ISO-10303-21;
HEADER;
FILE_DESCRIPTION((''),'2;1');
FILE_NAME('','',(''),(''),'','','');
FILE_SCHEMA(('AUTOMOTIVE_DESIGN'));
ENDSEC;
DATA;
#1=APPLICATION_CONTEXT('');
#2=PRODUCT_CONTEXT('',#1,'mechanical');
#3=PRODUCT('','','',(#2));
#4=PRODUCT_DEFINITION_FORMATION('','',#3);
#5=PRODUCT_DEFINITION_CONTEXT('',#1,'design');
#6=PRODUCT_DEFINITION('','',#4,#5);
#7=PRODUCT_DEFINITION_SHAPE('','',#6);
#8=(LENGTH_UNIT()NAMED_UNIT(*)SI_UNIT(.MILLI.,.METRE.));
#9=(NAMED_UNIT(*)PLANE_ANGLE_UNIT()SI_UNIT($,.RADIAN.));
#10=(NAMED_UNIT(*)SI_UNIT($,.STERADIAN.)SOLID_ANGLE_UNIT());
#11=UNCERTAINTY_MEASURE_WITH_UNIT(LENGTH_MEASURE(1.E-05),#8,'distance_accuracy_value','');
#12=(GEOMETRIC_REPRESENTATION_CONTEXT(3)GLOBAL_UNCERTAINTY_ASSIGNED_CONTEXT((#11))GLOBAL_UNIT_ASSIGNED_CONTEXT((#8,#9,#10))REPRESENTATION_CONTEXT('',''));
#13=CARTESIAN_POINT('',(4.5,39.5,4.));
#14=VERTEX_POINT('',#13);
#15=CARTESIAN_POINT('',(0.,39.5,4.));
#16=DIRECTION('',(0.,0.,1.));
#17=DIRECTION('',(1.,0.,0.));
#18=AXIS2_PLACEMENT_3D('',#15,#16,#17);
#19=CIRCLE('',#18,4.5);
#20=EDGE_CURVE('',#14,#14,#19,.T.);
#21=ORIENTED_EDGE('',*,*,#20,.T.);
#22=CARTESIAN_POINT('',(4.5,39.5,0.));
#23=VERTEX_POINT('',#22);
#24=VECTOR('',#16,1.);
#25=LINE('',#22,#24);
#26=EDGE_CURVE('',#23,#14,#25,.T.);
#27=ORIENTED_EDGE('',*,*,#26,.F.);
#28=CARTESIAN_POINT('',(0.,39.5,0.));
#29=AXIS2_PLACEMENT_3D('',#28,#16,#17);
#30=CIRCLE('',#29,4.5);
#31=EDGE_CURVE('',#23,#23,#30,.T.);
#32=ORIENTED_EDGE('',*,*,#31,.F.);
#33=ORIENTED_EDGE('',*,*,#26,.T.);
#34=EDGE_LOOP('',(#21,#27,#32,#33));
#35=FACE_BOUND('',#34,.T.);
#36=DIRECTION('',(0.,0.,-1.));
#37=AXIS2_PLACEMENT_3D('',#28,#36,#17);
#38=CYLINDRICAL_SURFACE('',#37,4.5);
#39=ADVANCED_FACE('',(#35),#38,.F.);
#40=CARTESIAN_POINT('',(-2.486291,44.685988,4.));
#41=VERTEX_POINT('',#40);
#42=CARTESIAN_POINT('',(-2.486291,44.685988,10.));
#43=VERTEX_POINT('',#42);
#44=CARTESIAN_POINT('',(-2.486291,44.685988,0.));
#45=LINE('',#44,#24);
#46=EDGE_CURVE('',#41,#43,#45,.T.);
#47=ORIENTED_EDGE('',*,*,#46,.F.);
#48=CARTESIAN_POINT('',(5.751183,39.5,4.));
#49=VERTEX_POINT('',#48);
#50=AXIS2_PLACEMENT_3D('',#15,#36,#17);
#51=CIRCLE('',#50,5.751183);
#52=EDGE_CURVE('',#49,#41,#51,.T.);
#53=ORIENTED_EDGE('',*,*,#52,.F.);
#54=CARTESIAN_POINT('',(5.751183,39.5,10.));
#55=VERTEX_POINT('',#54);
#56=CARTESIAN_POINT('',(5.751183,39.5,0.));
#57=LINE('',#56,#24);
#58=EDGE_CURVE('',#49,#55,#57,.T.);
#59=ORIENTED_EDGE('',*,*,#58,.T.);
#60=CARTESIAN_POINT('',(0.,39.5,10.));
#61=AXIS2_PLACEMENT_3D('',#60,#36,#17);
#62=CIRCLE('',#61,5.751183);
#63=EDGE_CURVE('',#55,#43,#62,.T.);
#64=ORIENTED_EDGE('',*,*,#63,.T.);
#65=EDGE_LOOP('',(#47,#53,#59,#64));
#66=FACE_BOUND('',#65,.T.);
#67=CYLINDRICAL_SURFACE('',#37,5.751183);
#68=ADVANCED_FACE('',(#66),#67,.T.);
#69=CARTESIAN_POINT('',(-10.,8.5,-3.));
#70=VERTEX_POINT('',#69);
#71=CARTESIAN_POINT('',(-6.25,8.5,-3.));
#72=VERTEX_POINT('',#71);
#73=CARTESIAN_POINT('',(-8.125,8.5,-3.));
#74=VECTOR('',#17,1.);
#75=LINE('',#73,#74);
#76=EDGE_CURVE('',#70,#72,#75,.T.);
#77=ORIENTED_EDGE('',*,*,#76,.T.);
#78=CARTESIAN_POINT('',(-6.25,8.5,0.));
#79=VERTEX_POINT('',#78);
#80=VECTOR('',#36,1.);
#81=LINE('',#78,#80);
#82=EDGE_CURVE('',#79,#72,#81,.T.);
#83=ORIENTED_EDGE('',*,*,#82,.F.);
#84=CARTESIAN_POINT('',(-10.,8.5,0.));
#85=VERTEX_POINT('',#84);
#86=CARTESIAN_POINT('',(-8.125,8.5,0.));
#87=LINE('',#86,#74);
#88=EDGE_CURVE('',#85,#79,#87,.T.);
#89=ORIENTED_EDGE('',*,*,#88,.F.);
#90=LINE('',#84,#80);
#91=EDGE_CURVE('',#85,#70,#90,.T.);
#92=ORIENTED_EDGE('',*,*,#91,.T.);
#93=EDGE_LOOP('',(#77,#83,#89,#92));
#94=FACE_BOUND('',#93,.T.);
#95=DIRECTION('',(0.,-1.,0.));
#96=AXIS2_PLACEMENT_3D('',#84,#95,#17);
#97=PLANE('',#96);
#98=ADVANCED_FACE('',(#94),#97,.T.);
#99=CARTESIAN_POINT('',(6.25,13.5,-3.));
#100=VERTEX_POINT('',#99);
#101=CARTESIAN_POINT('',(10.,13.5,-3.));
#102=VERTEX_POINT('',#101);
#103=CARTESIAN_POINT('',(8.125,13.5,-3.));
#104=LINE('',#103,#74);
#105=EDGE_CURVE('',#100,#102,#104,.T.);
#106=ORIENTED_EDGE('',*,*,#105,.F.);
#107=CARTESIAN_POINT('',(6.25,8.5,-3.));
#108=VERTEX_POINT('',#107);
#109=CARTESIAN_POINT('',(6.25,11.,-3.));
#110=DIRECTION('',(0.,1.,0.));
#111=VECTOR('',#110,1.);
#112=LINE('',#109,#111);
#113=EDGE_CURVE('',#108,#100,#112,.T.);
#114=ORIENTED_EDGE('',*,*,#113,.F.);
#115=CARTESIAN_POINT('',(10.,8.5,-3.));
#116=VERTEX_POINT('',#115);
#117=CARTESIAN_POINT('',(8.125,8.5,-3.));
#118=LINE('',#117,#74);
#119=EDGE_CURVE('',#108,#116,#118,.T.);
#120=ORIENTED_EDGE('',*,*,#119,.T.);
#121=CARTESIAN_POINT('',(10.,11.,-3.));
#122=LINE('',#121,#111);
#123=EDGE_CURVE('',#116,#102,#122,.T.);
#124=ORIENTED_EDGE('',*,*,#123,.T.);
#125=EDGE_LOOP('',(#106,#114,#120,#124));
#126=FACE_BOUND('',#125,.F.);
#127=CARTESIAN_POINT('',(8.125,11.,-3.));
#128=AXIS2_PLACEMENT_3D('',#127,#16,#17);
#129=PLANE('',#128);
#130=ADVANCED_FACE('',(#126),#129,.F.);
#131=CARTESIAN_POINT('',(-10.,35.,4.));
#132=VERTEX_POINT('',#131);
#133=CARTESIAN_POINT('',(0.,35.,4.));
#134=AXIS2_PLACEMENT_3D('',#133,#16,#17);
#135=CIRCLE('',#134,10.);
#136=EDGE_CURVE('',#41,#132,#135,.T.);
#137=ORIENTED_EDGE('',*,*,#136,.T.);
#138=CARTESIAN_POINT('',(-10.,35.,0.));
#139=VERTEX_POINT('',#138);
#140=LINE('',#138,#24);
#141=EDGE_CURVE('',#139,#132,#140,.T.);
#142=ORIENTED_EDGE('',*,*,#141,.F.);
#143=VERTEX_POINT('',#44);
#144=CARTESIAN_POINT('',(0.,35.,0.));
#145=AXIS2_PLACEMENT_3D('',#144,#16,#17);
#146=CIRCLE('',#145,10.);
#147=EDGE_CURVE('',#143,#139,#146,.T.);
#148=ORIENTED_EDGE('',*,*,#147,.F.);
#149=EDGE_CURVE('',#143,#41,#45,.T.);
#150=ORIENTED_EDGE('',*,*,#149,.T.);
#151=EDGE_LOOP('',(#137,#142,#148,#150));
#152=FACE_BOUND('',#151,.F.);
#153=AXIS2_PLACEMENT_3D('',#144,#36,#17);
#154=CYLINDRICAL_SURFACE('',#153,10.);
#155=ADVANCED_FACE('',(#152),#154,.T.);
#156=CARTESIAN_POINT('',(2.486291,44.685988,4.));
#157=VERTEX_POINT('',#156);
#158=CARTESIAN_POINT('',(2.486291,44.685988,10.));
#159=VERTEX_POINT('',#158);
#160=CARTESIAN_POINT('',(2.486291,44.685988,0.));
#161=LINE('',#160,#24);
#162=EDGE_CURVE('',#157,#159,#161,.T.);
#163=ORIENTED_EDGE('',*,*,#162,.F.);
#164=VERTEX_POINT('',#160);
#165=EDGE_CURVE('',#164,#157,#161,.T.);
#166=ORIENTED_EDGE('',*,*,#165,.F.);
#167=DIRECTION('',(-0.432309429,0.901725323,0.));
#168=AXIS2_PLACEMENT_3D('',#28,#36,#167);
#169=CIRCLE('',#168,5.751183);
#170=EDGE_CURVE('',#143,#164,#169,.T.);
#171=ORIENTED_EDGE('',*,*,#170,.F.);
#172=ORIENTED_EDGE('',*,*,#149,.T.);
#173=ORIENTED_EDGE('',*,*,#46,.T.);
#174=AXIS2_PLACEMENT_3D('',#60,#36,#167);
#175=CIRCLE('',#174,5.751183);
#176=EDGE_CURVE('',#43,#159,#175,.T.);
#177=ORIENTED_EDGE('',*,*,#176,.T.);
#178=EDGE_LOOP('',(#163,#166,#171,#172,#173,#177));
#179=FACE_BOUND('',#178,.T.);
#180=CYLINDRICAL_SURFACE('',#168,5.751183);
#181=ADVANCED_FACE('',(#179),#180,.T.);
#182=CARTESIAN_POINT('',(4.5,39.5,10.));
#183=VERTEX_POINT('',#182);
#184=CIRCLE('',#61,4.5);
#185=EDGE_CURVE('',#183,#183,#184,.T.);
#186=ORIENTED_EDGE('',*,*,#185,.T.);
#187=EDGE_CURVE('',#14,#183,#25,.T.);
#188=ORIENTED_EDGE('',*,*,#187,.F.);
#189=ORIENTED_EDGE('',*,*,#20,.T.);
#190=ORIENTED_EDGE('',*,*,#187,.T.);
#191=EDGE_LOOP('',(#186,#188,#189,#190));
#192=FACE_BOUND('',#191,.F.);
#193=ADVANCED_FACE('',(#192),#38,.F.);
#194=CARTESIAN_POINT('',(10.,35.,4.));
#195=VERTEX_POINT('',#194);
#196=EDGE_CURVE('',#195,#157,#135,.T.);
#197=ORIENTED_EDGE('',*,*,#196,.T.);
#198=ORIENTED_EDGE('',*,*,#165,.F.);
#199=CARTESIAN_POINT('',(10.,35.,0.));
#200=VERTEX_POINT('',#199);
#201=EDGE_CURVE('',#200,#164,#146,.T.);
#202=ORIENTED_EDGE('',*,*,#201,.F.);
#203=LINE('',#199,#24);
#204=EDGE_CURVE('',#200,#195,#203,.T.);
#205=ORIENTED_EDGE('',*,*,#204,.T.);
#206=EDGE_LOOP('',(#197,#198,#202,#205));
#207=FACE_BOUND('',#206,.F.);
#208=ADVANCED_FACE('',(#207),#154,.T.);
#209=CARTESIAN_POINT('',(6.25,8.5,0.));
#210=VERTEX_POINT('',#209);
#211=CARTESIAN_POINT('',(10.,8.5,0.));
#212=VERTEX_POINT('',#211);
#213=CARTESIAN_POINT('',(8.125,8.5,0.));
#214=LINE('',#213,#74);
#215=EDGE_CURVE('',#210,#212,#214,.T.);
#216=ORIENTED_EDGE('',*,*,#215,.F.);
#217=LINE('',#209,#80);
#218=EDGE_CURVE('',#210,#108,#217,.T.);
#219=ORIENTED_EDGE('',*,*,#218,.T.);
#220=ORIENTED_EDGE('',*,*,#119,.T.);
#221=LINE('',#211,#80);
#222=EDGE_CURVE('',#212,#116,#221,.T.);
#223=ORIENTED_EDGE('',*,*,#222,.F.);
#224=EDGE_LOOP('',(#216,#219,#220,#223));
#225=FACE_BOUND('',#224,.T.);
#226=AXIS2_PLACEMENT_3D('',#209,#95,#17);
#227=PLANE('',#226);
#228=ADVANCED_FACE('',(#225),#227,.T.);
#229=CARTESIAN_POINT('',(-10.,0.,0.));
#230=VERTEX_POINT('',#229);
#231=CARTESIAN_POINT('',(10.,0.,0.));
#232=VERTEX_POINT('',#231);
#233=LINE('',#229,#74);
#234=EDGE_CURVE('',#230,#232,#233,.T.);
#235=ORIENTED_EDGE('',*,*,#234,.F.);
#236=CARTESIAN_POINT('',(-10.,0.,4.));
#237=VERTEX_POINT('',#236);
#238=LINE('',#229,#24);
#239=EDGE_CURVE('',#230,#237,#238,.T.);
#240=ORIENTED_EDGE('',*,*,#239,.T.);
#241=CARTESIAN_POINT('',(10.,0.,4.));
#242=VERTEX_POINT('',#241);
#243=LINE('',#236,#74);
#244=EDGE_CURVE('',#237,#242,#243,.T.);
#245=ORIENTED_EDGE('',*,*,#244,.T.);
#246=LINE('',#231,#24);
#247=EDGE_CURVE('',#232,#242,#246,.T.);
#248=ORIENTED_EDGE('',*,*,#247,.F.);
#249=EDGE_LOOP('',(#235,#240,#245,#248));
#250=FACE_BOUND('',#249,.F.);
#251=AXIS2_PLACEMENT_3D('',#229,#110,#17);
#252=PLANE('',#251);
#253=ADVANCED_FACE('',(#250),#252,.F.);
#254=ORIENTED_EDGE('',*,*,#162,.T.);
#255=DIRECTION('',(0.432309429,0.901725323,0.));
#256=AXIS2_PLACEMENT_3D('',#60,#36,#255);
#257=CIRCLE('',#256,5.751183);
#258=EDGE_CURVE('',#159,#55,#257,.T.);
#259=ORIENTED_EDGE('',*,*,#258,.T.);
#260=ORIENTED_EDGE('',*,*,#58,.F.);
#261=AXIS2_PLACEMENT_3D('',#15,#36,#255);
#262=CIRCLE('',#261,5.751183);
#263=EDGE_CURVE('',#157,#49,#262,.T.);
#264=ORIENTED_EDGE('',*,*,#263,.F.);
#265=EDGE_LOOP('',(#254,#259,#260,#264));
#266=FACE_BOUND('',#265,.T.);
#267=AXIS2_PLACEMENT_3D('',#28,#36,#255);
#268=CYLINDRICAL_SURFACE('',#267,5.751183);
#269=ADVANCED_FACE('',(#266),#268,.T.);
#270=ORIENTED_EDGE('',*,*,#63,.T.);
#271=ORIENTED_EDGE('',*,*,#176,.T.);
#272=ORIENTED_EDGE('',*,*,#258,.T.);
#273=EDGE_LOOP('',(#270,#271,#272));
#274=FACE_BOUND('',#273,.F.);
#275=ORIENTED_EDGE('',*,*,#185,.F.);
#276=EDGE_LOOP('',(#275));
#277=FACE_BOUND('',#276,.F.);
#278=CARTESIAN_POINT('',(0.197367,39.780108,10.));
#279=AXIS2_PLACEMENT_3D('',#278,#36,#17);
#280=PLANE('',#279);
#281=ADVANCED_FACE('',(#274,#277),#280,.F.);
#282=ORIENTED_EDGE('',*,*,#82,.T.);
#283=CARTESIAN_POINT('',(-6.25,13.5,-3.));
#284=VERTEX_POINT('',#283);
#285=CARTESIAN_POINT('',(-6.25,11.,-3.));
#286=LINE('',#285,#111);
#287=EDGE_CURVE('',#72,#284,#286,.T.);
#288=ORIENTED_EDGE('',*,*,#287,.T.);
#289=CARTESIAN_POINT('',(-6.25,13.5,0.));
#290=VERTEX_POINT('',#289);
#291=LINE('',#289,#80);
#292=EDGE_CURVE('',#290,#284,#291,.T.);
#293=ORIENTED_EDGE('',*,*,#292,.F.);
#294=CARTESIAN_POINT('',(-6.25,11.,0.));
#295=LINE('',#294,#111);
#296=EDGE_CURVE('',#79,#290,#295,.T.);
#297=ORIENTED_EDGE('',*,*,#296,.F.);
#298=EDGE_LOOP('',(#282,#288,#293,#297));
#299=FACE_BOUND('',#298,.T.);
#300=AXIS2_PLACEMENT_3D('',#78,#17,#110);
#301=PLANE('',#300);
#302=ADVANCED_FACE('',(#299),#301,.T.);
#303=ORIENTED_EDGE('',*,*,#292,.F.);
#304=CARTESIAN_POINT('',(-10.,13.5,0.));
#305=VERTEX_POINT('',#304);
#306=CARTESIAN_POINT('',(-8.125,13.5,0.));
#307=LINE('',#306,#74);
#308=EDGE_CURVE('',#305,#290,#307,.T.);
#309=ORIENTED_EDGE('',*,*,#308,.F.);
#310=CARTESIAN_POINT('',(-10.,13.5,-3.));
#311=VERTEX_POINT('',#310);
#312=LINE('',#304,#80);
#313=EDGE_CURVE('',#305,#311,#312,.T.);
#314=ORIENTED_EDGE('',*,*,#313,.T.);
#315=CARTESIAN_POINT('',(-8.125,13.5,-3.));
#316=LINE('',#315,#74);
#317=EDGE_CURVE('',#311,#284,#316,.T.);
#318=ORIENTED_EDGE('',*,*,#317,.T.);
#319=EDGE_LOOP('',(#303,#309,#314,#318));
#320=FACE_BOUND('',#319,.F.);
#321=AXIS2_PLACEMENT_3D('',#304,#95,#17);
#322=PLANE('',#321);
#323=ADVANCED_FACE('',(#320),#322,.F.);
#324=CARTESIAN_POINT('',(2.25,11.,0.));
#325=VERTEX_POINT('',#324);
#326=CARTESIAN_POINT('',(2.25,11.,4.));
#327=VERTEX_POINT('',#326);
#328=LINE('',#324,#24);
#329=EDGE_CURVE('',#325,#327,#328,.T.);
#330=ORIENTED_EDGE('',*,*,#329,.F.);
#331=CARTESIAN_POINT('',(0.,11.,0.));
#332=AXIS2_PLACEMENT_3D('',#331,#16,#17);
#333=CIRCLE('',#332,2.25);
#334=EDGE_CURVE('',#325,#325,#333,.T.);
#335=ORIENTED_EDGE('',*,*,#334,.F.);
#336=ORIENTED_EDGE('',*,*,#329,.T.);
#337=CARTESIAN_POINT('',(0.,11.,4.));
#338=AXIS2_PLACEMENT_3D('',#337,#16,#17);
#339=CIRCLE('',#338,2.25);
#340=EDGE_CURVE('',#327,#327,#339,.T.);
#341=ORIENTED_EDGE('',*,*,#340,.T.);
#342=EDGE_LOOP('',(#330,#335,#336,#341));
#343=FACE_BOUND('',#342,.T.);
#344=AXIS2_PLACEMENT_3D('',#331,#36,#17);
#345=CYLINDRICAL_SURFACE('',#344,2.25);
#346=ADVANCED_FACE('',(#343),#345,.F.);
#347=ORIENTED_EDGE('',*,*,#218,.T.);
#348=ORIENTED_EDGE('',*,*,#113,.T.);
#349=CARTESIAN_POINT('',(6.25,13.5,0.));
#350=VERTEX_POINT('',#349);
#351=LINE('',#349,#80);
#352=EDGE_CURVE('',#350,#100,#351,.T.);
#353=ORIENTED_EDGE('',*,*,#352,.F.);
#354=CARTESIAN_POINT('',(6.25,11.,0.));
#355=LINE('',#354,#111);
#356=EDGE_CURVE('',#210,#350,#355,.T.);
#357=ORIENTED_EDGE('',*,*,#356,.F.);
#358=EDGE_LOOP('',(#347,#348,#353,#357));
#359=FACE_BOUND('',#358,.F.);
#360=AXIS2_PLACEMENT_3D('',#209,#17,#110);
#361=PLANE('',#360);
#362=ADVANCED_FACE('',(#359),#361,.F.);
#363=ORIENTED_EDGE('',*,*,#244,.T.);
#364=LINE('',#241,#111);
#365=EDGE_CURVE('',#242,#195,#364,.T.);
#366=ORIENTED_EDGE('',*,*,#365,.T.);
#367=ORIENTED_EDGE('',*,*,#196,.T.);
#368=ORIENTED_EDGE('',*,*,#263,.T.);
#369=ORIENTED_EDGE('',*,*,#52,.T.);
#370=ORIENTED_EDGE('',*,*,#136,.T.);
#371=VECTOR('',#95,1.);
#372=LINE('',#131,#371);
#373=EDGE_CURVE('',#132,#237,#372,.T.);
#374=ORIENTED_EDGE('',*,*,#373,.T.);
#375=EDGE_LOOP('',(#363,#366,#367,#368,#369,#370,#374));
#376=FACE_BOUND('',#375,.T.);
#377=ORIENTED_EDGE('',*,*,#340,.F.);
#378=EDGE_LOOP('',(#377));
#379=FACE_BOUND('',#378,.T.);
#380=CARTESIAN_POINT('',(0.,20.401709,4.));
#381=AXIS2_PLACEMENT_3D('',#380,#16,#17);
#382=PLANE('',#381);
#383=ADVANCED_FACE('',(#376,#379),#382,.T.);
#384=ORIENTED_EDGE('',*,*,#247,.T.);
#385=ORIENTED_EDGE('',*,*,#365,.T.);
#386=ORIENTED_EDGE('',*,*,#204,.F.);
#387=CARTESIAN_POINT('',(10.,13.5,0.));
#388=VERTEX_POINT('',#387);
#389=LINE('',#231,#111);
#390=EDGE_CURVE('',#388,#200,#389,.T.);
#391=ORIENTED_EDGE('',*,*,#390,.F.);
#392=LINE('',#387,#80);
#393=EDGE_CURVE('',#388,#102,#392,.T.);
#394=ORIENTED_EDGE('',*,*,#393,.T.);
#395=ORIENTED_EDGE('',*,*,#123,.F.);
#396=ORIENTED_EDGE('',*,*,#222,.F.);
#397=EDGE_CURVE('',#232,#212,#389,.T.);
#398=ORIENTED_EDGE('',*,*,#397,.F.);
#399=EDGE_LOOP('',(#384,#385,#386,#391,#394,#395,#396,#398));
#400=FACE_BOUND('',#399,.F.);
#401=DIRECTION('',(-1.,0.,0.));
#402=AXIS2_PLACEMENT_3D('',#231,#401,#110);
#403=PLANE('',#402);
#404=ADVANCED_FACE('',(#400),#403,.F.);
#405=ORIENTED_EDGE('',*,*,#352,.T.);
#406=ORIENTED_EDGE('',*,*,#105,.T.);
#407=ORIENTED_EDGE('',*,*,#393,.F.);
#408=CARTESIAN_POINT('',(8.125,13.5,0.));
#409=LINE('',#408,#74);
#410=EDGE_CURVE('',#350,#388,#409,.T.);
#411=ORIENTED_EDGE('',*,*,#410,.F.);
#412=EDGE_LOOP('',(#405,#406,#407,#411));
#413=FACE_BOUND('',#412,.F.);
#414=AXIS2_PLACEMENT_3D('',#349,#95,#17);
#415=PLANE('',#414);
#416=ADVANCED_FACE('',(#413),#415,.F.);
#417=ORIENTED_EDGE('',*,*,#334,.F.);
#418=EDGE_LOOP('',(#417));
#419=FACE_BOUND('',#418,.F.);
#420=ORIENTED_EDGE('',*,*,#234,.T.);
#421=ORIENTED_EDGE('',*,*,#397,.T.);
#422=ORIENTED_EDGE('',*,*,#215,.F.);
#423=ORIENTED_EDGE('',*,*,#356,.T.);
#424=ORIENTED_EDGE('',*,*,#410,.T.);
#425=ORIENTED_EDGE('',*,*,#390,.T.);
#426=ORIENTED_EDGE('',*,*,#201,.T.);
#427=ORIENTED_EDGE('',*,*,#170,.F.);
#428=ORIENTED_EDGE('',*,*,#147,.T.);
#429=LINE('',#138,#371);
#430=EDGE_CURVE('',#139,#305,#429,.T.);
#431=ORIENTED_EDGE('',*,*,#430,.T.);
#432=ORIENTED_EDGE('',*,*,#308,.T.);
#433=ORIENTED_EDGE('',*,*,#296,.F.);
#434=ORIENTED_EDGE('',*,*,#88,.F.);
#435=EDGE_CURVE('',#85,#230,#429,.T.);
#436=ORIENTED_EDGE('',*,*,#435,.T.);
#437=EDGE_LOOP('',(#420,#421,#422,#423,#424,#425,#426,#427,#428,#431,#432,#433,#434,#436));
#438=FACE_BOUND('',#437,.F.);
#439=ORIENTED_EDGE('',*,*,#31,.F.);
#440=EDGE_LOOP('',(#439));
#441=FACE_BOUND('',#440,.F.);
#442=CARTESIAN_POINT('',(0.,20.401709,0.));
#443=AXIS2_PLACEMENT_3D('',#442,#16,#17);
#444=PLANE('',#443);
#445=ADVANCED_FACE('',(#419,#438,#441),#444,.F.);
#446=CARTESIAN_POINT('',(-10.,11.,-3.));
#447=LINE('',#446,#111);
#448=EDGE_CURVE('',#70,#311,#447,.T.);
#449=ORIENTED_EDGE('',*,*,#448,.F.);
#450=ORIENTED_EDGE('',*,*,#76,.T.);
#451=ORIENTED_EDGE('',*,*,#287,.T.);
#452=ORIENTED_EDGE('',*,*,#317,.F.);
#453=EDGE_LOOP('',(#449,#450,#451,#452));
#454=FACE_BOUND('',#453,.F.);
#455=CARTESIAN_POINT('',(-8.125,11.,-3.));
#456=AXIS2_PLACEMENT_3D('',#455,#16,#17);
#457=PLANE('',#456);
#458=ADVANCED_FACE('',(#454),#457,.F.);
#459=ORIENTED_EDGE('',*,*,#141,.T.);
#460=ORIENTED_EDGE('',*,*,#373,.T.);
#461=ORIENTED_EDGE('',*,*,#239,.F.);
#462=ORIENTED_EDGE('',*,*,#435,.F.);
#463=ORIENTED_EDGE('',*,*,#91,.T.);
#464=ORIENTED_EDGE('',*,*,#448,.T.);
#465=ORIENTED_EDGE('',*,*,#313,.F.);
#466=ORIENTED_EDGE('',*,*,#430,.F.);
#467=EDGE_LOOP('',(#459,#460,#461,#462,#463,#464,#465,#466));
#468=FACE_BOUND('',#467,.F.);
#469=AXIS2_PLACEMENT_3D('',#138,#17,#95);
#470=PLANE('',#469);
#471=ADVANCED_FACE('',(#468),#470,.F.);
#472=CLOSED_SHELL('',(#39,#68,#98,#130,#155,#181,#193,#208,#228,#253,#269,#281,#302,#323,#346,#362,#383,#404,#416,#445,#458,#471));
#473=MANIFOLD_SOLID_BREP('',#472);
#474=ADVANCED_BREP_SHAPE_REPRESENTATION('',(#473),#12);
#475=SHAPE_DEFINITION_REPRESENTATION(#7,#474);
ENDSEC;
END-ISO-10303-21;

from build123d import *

# Parameters (mm, degrees)
F0_R     = 2.25
F0_R_2   = 4.5
F1_DEPTH = 4
F2_W     = 3.75
F2_H     = 5
F3_DEPTH = 3
F4_R     = 4.5
F5_DEPTH = 10


with BuildPart() as f1:
    # F0 (on Top) → F1 (new body)
    with BuildSketch(Plane.XY):
        with BuildLine():
            Line((-10, 35), (-10, 0))
            Line((-10, 0), (10, 0))
            Line((10, 0), (10, 35))
            ThreePointArc((10, 35), (0, 45), (-10, 35))
        make_face()
        with Locations((0, 11)):
            Circle(F0_R, mode=Mode.SUBTRACT)
        with Locations((0, 39.5)):
            Circle(F0_R_2, mode=Mode.SUBTRACT)
    extrude(amount=F1_DEPTH)

    # F2 (on Top) → F3 (join)
    with BuildSketch(Plane.XY):
        with Locations((-8.125, 11)):
            Rectangle(F2_W, F2_H)
        with Locations((8.125, 11)):
            Rectangle(F2_W, F2_H)
    extrude(amount=-F3_DEPTH)

    # F4 (on face) → F5 (join)
    with BuildSketch(Plane(origin=(0, 0, 0), x_dir=(1, 0, 0), z_dir=(0, 0, -1))):
        with BuildLine():
            ThreePointArc((2.4862908139, -44.6859877136), (4.8669921435, -42.5640656083), (5.7511834067, -39.5))
            ThreePointArc((5.7511834067, -39.5), (-3.0640656083, -34.6330078565), (-2.4862908139, -44.6859877136))
            ThreePointArc((-2.4862908139, -44.6859877136), (0, -45), (2.4862908139, -44.6859877136))
        make_face()
        with Locations((0, -39.5)):
            Circle(F4_R, mode=Mode.SUBTRACT)
        with BuildLine():
            ThreePointArc((2.4862908139, -44.6859877136), (0, -45), (-2.4862908139, -44.6859877136))
            ThreePointArc((-2.4862908139, -44.6859877136), (0, -45.2511834067), (2.4862908139, -44.6859877136))
        make_face()
    extrude(amount=-F5_DEPTH)


solid = f1.part
